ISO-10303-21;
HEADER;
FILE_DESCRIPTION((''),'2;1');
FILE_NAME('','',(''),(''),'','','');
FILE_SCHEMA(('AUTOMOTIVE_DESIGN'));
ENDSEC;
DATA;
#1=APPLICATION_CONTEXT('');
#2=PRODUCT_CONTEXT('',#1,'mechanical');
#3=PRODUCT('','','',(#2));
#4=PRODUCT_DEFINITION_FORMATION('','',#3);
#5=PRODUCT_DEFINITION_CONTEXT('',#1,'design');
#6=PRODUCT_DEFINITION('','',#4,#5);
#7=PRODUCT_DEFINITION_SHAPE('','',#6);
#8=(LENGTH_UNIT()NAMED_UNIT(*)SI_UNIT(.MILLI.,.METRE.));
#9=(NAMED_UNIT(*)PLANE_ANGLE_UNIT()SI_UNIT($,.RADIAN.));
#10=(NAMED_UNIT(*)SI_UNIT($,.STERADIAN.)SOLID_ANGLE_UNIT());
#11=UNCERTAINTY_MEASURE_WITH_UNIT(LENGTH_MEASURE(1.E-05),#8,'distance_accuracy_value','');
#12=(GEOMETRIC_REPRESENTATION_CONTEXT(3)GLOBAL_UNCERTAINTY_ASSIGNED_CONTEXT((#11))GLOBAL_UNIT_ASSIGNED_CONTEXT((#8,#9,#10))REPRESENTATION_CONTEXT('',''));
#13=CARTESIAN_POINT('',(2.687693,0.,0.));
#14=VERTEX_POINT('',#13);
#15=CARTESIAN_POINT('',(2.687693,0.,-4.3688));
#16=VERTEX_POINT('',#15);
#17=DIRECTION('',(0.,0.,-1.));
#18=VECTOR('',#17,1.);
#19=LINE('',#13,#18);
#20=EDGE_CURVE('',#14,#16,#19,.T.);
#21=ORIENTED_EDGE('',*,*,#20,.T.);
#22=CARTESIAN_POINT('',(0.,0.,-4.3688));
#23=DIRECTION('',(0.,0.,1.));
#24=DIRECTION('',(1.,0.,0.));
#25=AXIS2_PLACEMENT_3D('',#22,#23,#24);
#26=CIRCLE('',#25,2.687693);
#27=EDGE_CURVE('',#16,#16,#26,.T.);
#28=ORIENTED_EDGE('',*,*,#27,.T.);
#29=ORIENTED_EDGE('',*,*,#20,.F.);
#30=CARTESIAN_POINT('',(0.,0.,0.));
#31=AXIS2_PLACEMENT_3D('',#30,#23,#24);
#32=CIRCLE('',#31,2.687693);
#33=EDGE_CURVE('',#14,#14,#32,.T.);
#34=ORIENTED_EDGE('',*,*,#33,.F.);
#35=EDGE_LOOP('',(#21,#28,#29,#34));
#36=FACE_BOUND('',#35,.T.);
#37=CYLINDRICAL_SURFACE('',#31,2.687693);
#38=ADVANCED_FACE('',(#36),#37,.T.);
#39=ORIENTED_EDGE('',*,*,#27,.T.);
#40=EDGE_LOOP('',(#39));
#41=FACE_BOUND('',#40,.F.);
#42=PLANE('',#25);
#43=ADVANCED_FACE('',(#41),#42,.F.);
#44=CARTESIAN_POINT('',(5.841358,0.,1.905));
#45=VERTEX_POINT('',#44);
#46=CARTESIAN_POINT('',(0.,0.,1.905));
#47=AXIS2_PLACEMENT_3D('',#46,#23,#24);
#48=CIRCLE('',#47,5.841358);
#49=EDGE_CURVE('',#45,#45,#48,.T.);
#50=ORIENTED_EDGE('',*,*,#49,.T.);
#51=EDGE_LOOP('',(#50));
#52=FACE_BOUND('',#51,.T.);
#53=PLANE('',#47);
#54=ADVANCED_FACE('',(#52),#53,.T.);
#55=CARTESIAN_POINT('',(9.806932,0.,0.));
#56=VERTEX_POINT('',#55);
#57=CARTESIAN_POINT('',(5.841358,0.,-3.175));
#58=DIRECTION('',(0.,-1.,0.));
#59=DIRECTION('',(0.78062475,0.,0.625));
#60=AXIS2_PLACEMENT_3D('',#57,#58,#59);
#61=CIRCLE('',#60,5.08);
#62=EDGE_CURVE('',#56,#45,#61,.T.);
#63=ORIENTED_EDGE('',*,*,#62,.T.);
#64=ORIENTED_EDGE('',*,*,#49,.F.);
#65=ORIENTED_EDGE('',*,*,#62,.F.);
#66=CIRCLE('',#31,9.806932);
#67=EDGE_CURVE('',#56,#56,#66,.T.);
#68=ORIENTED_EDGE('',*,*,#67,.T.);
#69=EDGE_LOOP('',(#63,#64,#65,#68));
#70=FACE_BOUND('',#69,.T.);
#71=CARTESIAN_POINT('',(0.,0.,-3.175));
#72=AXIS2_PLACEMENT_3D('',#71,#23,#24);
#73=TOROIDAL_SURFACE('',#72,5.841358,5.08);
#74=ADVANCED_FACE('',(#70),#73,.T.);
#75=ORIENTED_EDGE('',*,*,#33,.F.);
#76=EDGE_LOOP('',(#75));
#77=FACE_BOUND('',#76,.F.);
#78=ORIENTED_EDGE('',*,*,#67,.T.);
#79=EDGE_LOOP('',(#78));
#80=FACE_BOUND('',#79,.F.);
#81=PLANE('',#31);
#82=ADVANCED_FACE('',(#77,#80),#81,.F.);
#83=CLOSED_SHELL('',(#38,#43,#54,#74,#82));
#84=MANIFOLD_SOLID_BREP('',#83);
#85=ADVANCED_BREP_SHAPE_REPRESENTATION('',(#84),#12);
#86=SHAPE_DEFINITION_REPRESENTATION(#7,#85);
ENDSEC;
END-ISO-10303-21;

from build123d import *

# Parameters (mm, degrees)
F0_R     = 9.806931969
F0_R_2   = 2.6876925043
F1_DEPTH = 1.905
F2_DEPTH = 4.3688


# Not quite as in the source:
# - a fillet or chamfer that OpenCascade refuses, or shapes differently, is made with other operations: its cross-section is extruded or revolved along the edge and cut away or added


with BuildPart() as f1:
    # F0 (on Top) → F1 (new body)
    with BuildSketch(Plane.XY):
        Circle(F0_R)
        Circle(F0_R_2, mode=Mode.SUBTRACT)
        Circle(F0_R_2)
    extrude(amount=F1_DEPTH)

    # F0 (on Top) → F2 (join)
    with BuildSketch(Plane.XY):
        Circle(F0_R_2)
    extrude(amount=-F2_DEPTH)

    # F3: fillet of radius 5.08 on 1 edges, made by hand

    # F3_s1 → F3_t2 (revolve, cut)
    with BuildSketch(Plane.XZ):
        with BuildLine():
            ThreePointArc((9.806931969, 0), (8.0410627657, 1.4040501198), (5.8413582401, 1.905))
            Line((5.8413582401, 1.905), (9.806931969, 1.905))
            Line((9.806931969, 1.905), (9.806931969, 0))
        make_face()
    revolve(axis=Axis((0, 0, 1.905), (0, 0, 1)), mode=Mode.SUBTRACT)


solid = f1.part
